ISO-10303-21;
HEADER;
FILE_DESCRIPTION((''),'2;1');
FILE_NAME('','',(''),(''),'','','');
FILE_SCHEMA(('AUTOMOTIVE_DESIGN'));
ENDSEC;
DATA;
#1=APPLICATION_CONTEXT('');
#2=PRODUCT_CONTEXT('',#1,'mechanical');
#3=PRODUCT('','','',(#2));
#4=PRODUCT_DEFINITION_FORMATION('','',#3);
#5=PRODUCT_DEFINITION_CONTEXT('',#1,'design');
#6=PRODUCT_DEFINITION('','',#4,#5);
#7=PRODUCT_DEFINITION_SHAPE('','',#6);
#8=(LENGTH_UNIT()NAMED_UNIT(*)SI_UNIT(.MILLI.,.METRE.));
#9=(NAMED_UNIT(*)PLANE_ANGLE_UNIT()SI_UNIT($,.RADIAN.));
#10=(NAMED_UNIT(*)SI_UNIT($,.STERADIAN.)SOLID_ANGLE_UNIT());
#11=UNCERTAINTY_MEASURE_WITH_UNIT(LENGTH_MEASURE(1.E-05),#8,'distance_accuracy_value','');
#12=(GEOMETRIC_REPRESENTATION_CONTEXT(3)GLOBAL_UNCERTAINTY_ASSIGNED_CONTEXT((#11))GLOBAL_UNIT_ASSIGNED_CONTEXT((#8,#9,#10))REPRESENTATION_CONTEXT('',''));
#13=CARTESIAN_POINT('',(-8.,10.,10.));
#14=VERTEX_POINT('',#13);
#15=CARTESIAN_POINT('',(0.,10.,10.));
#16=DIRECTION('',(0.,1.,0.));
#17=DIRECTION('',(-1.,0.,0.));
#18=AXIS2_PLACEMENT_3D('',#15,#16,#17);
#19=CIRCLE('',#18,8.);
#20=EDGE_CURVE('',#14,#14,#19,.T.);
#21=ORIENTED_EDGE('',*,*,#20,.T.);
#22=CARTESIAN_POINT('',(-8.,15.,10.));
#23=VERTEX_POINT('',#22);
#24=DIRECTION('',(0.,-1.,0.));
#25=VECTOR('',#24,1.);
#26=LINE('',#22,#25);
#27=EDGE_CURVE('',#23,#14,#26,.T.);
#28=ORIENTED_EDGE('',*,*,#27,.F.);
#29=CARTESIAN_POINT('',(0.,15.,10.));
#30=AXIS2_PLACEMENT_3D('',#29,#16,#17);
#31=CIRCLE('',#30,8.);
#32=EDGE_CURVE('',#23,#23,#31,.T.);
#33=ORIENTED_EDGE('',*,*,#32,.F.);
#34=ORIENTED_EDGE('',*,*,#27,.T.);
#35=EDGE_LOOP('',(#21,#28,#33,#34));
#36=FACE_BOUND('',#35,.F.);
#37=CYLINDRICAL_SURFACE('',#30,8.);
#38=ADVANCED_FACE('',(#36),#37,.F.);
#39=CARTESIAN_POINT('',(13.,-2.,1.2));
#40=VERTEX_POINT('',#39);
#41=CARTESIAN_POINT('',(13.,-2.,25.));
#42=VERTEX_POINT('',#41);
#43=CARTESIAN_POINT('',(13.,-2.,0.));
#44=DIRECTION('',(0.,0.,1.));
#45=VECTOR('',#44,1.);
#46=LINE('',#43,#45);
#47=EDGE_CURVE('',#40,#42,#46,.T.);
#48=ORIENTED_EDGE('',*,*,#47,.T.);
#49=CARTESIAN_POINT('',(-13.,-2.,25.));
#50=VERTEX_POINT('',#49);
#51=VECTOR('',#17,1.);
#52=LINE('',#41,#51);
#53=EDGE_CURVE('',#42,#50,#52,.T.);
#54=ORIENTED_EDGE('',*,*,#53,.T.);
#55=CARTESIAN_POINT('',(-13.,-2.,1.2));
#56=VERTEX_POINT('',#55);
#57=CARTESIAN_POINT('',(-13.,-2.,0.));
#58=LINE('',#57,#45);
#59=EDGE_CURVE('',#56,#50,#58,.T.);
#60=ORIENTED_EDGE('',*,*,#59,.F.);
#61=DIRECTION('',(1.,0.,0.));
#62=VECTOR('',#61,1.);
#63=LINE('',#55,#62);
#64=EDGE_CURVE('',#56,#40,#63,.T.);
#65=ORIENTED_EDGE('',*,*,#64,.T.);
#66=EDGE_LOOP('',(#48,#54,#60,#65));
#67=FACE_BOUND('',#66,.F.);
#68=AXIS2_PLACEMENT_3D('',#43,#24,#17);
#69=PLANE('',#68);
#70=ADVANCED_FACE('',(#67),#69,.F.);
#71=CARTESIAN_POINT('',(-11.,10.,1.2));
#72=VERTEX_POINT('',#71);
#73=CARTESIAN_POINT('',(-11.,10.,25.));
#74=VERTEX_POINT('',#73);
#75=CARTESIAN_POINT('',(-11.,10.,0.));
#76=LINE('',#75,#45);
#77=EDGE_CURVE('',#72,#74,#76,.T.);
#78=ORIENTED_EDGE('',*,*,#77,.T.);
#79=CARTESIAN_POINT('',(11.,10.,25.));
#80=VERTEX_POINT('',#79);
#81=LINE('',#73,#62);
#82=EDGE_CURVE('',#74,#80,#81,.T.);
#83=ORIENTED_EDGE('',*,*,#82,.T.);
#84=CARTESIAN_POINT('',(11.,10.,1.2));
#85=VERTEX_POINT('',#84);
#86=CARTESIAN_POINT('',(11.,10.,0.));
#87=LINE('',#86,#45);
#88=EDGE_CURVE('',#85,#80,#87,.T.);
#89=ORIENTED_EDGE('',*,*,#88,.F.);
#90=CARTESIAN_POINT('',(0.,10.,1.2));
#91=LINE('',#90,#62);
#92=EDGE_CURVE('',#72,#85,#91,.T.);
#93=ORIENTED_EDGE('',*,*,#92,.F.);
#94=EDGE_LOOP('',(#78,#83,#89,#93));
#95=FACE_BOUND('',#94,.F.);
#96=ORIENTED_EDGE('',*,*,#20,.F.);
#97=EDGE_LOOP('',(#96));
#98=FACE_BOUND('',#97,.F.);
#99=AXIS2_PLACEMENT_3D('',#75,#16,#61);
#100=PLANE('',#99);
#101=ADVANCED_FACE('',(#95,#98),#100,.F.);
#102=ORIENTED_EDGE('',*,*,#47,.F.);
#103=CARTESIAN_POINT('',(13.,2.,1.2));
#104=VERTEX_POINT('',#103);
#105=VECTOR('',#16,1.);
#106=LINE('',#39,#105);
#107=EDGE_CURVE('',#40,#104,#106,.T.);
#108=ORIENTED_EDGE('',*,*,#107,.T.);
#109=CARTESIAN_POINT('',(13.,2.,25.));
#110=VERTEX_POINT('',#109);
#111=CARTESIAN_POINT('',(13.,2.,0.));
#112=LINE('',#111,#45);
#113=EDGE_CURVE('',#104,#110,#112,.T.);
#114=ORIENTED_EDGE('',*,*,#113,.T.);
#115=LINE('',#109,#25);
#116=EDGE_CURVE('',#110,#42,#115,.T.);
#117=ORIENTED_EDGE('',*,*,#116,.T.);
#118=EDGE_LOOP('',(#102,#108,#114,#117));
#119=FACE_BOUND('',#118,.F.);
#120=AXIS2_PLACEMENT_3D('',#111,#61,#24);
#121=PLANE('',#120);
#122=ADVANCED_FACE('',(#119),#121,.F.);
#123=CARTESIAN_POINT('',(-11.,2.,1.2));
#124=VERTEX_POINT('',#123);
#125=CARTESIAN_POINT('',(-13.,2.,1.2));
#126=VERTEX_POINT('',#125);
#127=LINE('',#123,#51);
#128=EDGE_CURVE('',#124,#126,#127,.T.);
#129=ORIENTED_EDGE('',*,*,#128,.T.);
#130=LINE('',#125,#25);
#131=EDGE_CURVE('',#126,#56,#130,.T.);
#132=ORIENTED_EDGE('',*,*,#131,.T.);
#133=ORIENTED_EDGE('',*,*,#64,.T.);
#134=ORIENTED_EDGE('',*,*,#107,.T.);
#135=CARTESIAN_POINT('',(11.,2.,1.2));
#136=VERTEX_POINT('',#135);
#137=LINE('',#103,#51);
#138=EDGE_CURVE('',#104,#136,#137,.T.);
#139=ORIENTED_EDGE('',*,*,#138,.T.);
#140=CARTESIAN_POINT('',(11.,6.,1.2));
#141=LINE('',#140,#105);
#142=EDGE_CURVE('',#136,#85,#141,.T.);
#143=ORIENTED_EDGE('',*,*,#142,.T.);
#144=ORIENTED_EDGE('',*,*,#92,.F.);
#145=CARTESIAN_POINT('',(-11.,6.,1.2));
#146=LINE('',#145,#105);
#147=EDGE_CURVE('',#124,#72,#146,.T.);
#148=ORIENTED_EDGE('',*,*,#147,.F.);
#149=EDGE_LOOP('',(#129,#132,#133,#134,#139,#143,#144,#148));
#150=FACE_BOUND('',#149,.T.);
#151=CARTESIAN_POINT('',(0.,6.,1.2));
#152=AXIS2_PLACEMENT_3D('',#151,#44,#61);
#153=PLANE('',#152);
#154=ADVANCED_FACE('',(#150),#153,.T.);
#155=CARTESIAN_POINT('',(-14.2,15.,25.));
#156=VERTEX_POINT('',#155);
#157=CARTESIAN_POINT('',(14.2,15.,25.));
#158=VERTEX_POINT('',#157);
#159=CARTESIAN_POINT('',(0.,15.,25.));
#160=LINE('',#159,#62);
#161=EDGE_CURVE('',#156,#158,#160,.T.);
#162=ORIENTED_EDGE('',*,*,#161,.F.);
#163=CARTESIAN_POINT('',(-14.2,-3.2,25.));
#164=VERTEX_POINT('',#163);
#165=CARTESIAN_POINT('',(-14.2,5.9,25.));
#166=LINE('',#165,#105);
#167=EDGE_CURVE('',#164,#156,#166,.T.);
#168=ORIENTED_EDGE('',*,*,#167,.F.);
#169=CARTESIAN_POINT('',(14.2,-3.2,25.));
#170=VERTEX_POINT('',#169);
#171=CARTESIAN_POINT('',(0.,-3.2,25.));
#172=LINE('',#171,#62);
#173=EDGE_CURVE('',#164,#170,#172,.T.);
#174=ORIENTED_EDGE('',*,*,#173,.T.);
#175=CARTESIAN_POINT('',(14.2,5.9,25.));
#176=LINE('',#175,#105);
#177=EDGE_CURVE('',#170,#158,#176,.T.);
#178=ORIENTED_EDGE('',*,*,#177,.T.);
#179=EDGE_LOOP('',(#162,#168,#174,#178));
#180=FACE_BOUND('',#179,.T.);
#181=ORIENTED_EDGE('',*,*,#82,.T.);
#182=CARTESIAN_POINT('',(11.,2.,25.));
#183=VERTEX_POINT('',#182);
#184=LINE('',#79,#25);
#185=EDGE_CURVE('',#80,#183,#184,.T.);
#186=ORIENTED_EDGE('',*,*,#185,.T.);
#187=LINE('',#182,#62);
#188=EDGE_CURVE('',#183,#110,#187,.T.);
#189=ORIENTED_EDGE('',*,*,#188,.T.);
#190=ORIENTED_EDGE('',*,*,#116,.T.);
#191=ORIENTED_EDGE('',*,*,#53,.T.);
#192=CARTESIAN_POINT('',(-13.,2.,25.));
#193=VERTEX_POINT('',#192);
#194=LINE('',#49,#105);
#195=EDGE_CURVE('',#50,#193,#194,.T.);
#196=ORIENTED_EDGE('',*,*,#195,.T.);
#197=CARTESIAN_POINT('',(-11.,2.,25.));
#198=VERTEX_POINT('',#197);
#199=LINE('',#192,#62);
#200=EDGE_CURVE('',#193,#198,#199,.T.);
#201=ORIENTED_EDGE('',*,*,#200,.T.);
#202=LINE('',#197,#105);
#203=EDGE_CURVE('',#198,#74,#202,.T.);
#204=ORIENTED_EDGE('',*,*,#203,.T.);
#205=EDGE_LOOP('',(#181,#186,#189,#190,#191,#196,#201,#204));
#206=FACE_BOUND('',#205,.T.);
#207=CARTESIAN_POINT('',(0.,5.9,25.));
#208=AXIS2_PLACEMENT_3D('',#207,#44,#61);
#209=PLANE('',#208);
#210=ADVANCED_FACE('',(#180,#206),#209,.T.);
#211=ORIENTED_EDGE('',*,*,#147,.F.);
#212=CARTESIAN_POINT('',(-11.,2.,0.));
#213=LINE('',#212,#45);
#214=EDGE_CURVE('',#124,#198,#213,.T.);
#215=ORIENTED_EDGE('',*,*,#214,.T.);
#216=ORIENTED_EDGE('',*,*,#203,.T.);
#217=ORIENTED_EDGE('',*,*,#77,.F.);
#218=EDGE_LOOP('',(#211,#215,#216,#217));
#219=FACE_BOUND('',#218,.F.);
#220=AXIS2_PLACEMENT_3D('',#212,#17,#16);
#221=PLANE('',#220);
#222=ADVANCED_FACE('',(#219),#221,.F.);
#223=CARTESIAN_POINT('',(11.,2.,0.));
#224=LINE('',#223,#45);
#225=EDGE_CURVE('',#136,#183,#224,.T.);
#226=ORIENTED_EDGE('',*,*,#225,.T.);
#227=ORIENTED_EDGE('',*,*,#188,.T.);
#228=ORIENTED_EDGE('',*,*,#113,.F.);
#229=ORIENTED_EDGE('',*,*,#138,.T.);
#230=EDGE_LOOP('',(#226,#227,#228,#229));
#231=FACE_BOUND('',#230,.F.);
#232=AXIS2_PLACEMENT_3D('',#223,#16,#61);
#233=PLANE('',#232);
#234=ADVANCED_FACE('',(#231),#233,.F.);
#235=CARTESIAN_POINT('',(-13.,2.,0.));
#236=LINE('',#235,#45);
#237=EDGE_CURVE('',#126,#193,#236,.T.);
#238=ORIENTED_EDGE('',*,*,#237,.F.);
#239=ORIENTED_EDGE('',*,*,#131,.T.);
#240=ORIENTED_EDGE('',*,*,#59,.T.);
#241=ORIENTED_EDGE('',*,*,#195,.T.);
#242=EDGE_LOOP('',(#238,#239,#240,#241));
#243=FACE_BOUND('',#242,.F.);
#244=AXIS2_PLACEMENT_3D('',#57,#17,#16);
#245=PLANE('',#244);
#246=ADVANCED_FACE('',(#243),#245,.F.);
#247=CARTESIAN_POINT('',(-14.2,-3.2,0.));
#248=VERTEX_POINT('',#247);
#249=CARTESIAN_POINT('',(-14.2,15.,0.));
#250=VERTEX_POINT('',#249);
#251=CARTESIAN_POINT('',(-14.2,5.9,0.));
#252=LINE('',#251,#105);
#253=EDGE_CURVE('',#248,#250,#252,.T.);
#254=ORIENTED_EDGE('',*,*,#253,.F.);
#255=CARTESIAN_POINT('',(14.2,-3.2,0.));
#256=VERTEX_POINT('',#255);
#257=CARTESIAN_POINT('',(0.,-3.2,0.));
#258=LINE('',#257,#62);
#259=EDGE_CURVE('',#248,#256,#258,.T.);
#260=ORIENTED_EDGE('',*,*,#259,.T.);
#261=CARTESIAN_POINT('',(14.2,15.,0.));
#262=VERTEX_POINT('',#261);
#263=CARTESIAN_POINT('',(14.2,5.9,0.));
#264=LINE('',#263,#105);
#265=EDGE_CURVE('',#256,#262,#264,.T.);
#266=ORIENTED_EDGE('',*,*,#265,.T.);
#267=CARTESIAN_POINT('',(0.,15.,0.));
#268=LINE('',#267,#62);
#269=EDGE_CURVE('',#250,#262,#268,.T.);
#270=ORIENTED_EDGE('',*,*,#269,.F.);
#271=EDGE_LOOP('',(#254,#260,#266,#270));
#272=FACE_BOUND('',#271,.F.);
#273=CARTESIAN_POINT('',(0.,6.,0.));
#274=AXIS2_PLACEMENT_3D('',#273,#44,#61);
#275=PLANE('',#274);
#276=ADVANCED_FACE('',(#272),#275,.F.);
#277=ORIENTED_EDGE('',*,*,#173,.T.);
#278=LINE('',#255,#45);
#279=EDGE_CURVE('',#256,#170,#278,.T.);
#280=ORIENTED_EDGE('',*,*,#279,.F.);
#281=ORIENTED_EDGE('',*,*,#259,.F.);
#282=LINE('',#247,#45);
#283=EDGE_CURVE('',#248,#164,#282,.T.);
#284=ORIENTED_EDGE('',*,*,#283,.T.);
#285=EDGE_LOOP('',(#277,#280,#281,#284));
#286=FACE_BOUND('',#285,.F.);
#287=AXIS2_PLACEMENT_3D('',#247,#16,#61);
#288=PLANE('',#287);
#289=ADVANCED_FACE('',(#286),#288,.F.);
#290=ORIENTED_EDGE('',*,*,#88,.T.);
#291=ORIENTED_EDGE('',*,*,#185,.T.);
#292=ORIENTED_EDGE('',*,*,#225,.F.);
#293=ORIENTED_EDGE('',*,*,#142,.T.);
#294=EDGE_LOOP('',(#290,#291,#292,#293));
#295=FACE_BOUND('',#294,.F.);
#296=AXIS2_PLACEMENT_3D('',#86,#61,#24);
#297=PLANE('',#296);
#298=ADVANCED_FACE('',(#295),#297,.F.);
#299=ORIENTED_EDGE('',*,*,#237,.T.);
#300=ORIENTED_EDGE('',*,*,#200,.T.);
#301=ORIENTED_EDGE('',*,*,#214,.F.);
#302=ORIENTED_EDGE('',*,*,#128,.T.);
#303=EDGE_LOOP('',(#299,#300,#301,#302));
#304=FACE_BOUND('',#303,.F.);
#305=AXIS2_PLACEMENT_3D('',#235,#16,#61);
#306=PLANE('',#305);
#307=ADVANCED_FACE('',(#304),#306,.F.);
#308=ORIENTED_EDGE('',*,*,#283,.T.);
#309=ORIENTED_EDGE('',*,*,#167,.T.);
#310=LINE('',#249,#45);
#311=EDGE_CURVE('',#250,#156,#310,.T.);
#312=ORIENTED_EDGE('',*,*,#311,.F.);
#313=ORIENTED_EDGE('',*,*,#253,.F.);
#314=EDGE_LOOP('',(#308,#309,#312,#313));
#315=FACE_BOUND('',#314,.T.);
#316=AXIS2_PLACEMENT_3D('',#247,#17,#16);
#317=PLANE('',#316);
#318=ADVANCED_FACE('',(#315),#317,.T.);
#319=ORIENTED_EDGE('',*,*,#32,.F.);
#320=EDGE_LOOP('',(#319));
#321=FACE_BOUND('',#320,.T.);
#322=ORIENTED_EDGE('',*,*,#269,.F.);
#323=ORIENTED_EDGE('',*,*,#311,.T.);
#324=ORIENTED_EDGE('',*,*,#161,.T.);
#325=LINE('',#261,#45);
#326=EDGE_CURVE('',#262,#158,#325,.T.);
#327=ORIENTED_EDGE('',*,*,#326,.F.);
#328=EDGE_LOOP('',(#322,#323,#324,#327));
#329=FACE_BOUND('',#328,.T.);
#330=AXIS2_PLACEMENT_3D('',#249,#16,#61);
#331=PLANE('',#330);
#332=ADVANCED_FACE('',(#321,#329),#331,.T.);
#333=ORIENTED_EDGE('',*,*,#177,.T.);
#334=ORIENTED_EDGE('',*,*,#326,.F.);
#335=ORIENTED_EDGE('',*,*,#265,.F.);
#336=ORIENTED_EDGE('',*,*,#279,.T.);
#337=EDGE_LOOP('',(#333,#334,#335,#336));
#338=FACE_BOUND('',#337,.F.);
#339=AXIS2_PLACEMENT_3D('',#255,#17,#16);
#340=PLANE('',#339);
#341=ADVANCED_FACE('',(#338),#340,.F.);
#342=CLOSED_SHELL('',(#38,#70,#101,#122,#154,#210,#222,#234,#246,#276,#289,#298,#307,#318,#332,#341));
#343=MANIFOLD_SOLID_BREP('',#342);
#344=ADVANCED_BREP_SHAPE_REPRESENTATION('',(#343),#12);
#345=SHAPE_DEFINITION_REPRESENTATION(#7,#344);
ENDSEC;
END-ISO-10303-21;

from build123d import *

# Parameters (mm, degrees)
F0_W     = 28.4
F0_H     = 18.2
F1_DEPTH = 25
F0_W_2   = 22
F0_H_2   = 8
F2_DEPTH = 1.2
F3_R     = 8
F4_DEPTH = 5


with BuildPart() as f1:
    # F0 (on Top) → F1 (new body)
    with BuildSketch(Plane.XY):
        with Locations((0, 5.9)):
            Rectangle(F0_W, F0_H)
        Polygon((11, 2), (13, 2), (13, -2), (-13, -2), (-13, 2), (-11, 2), (-11, 10), (11, 10), align=None, mode=Mode.SUBTRACT)
    extrude(amount=F1_DEPTH)

    # F0 (on Top) → F2 (join)
    with BuildSketch(Plane.XY):
        with Locations((0, 6)):
            Rectangle(F0_W_2, F0_H_2)
        Polygon((13, -2), (13, 2), (11, 2), (-11, 2), (-13, 2), (-13, -2), align=None)
    extrude(amount=F2_DEPTH)

    # F3 (on face) → F4 (cut)
    with BuildSketch(Plane(origin=(0, 15, 0), x_dir=(-1, 0, 0), z_dir=(0, 1, 0))):
        with Locations((0, 10)):
            Circle(F3_R)
    extrude(amount=-F4_DEPTH, mode=Mode.SUBTRACT)


solid = f1.part
